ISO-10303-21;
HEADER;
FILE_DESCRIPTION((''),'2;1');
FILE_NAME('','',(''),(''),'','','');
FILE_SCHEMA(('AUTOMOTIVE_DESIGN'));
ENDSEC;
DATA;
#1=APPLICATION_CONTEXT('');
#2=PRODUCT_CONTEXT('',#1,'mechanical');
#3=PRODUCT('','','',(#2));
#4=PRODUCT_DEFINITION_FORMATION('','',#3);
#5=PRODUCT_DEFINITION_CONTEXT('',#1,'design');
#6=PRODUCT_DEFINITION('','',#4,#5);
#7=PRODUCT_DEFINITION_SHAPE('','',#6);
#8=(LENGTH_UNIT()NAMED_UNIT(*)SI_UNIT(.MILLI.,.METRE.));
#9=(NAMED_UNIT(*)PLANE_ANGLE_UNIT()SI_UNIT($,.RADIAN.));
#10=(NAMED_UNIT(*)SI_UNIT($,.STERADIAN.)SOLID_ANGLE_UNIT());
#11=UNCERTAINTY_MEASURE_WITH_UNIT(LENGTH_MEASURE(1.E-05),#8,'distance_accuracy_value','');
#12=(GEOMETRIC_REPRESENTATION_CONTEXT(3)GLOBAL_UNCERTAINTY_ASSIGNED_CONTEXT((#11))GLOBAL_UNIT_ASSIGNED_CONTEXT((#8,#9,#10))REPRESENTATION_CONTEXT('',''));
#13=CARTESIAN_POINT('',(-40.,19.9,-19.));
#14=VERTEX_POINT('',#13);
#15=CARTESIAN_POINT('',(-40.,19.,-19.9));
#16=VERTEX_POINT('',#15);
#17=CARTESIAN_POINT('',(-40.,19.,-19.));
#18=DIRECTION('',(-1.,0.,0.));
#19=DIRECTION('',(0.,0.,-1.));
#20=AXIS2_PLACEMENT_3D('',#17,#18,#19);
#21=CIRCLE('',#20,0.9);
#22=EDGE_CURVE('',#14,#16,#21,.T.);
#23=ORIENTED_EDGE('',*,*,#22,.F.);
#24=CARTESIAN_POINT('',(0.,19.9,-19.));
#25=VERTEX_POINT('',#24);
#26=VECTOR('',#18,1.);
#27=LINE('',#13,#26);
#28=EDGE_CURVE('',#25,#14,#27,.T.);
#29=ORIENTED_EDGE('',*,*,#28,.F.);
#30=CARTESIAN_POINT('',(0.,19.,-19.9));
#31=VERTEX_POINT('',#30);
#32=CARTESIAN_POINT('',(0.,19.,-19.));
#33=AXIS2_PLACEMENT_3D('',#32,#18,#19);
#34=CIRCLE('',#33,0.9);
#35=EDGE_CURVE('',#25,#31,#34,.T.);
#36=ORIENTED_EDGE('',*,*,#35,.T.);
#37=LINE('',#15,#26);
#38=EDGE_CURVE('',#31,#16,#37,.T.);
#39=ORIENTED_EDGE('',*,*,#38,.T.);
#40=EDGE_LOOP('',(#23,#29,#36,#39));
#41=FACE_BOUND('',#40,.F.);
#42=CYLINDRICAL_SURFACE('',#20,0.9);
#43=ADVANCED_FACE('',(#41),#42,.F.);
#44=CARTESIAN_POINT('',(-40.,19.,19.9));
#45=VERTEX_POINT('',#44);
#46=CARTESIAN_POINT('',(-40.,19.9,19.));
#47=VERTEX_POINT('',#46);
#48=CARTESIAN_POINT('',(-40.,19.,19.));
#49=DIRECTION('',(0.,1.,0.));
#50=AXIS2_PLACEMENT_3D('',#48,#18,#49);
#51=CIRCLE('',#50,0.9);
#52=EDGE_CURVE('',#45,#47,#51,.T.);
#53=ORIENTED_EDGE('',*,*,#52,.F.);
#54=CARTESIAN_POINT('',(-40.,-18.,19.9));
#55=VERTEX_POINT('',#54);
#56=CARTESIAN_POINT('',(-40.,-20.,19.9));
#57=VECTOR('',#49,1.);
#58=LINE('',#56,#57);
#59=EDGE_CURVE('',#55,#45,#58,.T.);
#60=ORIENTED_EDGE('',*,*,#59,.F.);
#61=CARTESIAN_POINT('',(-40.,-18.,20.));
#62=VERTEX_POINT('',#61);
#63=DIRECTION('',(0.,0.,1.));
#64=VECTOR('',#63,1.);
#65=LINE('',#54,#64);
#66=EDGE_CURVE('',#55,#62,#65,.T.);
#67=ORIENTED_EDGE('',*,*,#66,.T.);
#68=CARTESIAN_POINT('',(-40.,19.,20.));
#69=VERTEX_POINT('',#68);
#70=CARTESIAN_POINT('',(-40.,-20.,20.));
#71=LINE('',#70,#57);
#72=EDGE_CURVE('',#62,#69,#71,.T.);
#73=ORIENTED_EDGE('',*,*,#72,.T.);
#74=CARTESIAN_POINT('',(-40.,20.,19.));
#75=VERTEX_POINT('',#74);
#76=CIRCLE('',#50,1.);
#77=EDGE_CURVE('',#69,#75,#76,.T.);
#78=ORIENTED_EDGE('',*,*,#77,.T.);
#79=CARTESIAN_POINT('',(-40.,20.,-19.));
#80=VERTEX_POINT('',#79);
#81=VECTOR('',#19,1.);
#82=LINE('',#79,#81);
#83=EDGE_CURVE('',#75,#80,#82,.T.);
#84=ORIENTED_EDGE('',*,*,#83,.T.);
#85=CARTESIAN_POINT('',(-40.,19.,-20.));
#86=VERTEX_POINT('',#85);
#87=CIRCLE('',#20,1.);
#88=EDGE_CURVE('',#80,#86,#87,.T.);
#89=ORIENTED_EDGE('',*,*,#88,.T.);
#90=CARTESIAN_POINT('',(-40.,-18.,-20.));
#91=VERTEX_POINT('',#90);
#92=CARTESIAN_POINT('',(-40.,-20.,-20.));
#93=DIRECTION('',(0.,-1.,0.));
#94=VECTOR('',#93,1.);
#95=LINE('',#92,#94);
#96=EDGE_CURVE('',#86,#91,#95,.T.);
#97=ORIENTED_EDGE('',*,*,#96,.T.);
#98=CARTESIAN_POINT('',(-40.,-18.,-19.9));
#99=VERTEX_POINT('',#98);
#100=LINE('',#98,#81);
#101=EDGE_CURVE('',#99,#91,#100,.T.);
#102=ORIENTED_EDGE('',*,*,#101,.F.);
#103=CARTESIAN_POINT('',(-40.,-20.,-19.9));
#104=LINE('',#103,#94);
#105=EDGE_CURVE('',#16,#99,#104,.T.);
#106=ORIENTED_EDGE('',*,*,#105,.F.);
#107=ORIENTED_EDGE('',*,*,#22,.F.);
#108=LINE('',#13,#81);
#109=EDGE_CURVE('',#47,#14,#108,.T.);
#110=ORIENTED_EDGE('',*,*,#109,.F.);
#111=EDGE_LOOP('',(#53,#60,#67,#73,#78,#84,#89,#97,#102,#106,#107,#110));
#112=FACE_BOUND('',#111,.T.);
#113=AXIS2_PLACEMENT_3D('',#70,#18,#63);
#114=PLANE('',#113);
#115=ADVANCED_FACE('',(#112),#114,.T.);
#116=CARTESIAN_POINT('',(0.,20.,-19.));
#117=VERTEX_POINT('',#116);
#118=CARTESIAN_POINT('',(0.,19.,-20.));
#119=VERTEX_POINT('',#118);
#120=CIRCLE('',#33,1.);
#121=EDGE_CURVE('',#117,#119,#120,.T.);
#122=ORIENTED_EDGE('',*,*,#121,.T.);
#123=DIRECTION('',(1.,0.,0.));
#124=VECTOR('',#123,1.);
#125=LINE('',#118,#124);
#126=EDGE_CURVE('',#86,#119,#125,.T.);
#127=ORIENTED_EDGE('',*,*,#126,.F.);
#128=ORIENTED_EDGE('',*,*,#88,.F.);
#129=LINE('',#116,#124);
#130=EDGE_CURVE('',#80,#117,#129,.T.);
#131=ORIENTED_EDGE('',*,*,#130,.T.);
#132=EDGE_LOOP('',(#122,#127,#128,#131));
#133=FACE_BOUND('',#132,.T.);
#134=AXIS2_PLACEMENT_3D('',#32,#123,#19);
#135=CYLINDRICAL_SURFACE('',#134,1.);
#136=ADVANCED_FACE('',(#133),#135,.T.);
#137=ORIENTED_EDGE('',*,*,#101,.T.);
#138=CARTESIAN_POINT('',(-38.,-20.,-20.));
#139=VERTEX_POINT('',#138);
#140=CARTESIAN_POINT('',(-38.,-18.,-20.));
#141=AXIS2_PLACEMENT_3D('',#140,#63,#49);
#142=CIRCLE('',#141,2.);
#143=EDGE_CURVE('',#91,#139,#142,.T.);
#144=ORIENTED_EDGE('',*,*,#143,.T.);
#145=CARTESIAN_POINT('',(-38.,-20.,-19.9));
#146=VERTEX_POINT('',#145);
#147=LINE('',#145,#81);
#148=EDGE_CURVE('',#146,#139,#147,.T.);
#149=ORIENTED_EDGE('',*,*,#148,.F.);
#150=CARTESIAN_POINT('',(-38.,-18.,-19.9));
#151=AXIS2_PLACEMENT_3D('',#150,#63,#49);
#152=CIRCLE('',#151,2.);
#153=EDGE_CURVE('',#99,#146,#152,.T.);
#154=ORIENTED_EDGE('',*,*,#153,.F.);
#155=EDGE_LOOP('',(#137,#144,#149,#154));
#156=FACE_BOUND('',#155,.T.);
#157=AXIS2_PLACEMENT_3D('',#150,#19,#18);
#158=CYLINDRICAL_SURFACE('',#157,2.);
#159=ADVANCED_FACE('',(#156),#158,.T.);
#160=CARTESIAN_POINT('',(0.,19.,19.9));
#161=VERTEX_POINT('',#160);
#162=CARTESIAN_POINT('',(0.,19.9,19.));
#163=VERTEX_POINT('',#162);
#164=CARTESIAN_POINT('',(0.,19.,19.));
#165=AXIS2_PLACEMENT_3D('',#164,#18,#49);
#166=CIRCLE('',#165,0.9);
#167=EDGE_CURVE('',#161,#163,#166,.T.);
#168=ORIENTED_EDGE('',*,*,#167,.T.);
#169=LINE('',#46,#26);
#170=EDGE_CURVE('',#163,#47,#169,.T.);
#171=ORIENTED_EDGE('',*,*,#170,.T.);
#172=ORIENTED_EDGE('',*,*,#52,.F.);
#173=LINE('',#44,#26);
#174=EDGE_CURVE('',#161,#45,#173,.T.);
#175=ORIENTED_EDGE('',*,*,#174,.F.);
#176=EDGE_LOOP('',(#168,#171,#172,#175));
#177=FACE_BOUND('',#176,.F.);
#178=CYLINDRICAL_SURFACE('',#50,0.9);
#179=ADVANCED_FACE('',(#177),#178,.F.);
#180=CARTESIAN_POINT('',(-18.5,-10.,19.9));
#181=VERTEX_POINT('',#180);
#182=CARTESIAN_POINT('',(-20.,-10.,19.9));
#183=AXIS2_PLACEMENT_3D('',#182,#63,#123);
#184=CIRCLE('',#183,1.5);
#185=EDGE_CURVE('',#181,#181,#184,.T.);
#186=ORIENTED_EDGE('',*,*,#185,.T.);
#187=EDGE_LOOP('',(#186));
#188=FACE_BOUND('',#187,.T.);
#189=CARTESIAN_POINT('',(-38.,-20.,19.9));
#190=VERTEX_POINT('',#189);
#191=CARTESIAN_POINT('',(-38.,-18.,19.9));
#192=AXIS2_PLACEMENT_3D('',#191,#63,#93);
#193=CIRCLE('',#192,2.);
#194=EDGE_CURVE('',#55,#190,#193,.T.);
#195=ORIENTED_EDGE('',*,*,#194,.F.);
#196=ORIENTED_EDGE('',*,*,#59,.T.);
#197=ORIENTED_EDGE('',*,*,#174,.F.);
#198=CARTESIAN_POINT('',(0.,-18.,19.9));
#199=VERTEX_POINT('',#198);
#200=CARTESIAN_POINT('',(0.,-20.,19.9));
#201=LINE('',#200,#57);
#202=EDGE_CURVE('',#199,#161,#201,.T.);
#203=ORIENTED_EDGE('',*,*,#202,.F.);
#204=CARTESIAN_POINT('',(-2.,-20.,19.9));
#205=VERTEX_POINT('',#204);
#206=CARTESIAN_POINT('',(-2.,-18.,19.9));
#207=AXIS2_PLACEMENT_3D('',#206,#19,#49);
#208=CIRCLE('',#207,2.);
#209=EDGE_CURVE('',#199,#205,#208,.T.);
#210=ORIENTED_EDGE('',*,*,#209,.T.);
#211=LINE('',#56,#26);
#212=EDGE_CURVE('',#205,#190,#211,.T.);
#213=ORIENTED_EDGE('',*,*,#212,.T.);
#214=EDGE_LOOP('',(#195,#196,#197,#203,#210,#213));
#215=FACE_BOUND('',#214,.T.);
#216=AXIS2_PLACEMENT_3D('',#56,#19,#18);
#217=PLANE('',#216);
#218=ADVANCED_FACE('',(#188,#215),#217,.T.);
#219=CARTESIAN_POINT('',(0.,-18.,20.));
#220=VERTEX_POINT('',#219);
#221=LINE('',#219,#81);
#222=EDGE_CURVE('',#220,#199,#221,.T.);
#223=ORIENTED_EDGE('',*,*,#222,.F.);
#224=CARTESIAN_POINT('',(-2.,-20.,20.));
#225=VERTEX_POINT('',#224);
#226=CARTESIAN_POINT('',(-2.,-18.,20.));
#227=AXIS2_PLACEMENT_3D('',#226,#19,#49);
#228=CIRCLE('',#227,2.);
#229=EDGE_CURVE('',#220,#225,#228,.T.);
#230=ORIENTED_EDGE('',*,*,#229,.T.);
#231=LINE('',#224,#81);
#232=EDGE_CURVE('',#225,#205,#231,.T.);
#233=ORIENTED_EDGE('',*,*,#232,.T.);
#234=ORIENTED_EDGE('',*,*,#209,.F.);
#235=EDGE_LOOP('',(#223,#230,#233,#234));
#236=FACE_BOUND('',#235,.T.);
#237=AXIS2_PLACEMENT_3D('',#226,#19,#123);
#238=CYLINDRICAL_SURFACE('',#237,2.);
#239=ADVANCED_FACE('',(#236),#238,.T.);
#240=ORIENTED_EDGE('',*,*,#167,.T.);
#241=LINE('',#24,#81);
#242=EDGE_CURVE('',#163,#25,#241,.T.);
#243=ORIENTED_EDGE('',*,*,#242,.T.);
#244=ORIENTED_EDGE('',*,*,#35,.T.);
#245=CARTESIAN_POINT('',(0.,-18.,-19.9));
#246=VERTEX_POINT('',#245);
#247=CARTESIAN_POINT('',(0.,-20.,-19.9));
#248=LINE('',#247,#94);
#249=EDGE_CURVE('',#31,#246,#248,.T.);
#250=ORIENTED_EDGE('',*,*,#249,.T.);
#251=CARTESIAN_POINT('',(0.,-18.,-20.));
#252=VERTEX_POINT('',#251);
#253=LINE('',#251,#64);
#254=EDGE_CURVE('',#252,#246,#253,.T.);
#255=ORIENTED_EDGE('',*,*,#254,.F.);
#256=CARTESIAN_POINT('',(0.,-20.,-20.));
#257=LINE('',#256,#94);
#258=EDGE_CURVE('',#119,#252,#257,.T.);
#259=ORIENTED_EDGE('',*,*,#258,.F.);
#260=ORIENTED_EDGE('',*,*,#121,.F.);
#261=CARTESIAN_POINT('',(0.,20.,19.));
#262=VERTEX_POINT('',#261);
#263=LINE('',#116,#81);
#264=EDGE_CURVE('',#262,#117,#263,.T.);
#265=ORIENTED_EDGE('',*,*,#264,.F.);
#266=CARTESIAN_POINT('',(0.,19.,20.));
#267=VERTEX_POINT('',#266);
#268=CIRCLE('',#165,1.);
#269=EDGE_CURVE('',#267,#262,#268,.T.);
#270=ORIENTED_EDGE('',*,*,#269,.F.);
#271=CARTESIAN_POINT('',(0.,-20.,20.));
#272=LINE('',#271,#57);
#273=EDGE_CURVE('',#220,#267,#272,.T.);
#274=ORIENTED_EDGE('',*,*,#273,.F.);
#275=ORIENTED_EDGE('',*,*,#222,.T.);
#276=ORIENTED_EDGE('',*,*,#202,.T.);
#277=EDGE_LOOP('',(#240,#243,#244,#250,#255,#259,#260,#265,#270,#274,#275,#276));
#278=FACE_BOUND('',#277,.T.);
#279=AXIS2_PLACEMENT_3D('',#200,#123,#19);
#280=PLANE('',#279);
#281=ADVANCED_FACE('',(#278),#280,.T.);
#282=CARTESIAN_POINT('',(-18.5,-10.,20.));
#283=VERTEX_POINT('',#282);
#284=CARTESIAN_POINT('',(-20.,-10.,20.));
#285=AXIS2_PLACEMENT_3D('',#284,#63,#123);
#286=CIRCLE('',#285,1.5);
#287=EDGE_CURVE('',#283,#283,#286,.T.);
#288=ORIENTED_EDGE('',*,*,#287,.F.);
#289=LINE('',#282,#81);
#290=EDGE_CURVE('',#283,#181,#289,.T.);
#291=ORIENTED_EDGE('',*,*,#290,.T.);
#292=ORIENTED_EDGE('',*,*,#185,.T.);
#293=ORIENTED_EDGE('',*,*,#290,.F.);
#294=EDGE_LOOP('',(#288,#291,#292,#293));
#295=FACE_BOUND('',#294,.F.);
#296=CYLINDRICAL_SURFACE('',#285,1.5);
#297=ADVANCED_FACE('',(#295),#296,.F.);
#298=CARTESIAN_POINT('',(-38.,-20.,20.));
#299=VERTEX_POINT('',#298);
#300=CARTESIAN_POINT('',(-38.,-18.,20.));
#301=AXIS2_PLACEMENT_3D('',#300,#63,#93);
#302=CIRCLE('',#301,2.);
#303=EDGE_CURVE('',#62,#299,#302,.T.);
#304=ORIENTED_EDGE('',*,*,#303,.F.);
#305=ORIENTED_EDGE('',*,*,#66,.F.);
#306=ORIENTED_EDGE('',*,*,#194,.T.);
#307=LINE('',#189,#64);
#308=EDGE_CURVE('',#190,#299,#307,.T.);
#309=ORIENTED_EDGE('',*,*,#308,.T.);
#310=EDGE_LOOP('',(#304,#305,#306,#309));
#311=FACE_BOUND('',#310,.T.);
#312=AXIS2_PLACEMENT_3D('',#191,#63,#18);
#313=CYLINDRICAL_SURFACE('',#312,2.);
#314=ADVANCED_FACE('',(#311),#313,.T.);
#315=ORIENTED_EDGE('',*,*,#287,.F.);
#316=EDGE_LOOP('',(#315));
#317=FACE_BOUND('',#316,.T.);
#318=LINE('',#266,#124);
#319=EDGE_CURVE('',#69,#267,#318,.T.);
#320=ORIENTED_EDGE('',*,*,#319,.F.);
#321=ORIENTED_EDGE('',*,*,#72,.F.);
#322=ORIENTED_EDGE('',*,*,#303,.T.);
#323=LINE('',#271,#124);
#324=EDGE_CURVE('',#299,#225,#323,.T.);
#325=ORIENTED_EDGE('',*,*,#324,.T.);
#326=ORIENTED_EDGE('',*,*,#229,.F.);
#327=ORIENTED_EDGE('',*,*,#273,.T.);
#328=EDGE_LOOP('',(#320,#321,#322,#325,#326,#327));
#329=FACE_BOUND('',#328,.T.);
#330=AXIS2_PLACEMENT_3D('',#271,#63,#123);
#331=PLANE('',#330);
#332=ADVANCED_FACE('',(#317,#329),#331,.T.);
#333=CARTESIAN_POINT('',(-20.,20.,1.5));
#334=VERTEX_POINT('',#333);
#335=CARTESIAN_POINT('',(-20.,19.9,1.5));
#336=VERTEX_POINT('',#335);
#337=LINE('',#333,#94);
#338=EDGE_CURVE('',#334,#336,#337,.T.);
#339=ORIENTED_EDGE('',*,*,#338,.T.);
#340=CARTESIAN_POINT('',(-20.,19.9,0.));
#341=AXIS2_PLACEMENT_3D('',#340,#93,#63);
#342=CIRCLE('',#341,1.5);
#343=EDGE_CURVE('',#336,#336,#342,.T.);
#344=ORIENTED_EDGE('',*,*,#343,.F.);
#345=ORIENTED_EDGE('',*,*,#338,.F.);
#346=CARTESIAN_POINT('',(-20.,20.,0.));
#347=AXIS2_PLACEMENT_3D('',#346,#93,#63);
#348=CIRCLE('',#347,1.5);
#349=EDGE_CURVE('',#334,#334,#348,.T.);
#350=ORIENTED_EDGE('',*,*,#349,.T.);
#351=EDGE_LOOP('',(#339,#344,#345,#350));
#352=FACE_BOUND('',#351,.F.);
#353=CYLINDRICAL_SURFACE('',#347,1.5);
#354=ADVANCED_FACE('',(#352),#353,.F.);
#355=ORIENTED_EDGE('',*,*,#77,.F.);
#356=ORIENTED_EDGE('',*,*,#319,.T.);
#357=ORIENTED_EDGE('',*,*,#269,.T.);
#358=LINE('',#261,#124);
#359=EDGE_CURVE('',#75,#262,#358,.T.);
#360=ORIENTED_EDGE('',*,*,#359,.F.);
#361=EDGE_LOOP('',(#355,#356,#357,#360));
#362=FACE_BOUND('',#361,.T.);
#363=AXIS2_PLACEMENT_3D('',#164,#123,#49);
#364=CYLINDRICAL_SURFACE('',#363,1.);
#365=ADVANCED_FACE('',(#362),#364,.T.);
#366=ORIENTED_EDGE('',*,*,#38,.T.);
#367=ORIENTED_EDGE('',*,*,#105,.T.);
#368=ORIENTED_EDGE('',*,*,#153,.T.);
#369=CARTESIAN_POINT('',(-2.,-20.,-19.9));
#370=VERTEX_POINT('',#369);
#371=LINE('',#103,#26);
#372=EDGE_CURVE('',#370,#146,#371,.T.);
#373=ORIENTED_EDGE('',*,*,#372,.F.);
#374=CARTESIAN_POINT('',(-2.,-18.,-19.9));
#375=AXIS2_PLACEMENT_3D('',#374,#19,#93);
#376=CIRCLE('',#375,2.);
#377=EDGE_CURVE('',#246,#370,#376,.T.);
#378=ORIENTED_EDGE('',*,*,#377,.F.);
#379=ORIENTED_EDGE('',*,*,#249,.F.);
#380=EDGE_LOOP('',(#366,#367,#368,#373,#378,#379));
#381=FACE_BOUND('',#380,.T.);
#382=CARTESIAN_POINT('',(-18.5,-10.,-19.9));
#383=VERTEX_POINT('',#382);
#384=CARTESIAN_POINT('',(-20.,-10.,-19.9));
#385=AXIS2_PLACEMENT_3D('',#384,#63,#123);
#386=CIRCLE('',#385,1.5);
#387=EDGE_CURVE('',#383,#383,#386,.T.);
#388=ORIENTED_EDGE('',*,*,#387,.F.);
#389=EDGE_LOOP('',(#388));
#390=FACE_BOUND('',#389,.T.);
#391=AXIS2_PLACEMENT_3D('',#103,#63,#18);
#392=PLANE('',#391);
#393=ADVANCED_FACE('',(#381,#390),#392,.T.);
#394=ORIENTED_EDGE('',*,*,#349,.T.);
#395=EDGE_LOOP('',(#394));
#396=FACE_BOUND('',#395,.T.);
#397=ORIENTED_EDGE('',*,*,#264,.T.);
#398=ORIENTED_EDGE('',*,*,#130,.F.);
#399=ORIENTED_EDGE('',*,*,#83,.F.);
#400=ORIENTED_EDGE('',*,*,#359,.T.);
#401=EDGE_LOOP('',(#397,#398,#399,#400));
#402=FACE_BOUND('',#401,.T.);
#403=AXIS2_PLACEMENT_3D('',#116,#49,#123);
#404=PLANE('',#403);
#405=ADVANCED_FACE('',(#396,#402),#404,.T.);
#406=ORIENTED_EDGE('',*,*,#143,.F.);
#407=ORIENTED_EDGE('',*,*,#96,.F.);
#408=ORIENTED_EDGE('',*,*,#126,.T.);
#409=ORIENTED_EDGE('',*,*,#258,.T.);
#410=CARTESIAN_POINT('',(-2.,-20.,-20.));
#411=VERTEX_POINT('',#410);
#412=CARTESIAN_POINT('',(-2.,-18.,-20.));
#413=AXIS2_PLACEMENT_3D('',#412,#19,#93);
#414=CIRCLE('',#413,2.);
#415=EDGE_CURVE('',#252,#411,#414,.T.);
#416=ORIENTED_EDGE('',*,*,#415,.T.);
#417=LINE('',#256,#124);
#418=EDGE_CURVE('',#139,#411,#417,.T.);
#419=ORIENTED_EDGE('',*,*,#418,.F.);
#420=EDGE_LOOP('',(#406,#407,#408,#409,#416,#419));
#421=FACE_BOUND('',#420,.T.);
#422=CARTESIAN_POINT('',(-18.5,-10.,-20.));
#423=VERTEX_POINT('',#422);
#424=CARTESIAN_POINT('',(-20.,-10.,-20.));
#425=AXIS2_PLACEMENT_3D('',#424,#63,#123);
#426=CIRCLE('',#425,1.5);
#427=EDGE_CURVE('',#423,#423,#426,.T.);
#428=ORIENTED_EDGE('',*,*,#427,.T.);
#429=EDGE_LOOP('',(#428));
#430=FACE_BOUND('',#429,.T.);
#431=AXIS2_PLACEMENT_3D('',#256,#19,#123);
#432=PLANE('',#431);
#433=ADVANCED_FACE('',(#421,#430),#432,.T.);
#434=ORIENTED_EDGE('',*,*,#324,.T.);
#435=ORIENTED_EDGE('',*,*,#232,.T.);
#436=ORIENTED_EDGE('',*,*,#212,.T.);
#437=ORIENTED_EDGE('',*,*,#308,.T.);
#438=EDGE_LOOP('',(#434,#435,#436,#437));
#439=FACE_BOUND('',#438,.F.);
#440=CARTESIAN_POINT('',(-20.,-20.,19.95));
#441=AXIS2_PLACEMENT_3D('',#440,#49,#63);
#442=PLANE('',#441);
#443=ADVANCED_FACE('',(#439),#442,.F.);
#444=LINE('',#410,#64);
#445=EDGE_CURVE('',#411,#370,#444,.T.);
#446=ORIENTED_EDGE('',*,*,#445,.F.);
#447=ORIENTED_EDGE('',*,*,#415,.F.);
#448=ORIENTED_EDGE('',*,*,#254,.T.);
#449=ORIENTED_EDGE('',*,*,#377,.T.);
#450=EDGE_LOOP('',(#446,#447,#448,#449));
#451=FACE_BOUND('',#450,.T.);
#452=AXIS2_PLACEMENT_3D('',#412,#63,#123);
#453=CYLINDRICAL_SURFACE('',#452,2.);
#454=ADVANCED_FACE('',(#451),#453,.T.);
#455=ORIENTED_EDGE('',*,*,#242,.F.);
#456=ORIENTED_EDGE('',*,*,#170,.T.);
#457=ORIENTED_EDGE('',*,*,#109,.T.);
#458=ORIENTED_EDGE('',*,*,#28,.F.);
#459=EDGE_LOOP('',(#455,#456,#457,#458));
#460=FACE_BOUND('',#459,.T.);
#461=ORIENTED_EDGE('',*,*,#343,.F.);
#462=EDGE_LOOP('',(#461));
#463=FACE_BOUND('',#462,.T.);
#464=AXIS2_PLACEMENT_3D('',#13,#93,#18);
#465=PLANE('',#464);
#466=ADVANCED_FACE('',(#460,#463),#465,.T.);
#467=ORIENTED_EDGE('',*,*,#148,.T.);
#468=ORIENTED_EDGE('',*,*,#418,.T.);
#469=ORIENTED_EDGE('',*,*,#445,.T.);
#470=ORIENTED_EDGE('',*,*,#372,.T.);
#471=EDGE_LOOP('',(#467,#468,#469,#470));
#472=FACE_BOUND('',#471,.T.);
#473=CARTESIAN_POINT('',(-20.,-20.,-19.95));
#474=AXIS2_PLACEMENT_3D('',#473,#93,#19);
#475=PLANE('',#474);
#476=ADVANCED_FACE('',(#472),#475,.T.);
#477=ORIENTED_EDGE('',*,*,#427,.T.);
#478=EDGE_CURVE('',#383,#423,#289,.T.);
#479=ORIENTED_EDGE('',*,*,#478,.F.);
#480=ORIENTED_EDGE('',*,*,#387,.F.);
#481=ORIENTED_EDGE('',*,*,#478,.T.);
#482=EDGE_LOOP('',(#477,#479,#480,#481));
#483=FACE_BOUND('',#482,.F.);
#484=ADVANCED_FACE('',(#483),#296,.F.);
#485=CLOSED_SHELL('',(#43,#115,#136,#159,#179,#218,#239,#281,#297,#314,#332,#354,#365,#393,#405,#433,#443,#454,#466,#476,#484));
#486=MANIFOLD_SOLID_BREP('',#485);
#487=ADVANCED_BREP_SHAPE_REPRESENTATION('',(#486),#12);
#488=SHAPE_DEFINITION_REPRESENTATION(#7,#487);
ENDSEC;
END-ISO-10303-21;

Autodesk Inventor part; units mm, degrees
ref_plane "YZ Plane" through (0, 0, 0) normal (1, 0, 0) x (0, 1, 0)
ref_plane "XY Plane" through (0, 0, 0) normal (0, 0, 1) x (1, 0, 0)
sketch "Sketch1" plane through (0, 0, 0) normal (1, 0, 0) x (0, 1, 0)
  line L0 (20, 20) -> (-20, 20) construction
  line L1 (-20, 20) -> (-20, -20) construction
  line L2 (-20, -20) -> (20, -20) construction
  line L3 (20, -20) -> (20, 20) construction
  line L4 (20, 20) -> (-20, -20) construction
  line L5 (-20, 20) -> (20, -20) construction
  line L6 (-20, 20) -> (19, 20)
  arc A0 (20, 19) -> (19, 20) centre (19, 19) ccw
  line L7 (-20, -20) -> (19, -20)
  arc A1 (19, -20) -> (20, -19) centre (19, -19) ccw
  line L8 (20, -19) -> (20, 19)
  point P0 (0, 0)
  dimension "d0" = 40
  dimension "d1" = 40
  dimension "d2" = 39
  dimension "d3" = 39
ref_plane "Work Plane1" through (0, -20, 20) normal (0, 1, 0) x (-1, 0, 0)
sketch "Sketch2" plane through (0, -20, 20) normal (0, 1, 0) x (-1, 0, 0)
  line L0 (0, 0) -> (40, 0)
  line L1 (40, 0) -> (40, -0.1)
  line L2 (40, -0.1) -> (0, -0.1)
  line L3 (0, -0.1) -> (0, 0)
  point P0 (0, -20)
  dimension "d4" = 40
  dimension "d5" = 0.1
sweep "Sweep1" add profiles "Sketch2" path "Sketch1"
fillet "Fillet1" radius 2 4 edges at (0, -20, 19.95) (0, -20, -19.95) (-40, -20, 19.95) (-40, -20, -19.95)
sketch "Sketch3" plane through (-40, 19, 20) normal (0, 0, 1) x (1, 0, 0)
  circle A0 centre (20, -29) radius 1.5
  line L0 (0, 0) -> (0, -37) construction
  line L1 (0, -29) -> (40, -29) construction
  line L2 (40, 0) -> (40, -37) construction
  line L3 (38, -39) -> (2, -39) construction
  point P0 (40, -19)
  dimension "d9" = 3
  dimension "d10" = 10
  dimension "d11" = 20
extrude "Extrusion1" cut sketch "Sketch3" against normal through all
surface extrude "ExtrusionSrf1" sketch "Sketch3" against normal through all shown yes curves A0
sketch "Sketch4" plane through (-40, 20, 19) normal (0, 1, 0) x (1, 0, 0)
  line L0 (0, 0) -> (40, 0) construction
  line L1 (0, 38) -> (40, 38) construction
  line L2 (0, 0) -> (40, 38) construction
  line L3 (40, 0) -> (40, 38) construction
  line L4 (40, 0) -> (0, 38) construction
  point P0 (40, 19)
  point P1 (20, 19)
hole "Hole1" at (-20, 20, 0) direction (0, -1, 0) diameter 3 end through all
equation "\"d3\" = d2"
properties material "Iron, Malleable"
